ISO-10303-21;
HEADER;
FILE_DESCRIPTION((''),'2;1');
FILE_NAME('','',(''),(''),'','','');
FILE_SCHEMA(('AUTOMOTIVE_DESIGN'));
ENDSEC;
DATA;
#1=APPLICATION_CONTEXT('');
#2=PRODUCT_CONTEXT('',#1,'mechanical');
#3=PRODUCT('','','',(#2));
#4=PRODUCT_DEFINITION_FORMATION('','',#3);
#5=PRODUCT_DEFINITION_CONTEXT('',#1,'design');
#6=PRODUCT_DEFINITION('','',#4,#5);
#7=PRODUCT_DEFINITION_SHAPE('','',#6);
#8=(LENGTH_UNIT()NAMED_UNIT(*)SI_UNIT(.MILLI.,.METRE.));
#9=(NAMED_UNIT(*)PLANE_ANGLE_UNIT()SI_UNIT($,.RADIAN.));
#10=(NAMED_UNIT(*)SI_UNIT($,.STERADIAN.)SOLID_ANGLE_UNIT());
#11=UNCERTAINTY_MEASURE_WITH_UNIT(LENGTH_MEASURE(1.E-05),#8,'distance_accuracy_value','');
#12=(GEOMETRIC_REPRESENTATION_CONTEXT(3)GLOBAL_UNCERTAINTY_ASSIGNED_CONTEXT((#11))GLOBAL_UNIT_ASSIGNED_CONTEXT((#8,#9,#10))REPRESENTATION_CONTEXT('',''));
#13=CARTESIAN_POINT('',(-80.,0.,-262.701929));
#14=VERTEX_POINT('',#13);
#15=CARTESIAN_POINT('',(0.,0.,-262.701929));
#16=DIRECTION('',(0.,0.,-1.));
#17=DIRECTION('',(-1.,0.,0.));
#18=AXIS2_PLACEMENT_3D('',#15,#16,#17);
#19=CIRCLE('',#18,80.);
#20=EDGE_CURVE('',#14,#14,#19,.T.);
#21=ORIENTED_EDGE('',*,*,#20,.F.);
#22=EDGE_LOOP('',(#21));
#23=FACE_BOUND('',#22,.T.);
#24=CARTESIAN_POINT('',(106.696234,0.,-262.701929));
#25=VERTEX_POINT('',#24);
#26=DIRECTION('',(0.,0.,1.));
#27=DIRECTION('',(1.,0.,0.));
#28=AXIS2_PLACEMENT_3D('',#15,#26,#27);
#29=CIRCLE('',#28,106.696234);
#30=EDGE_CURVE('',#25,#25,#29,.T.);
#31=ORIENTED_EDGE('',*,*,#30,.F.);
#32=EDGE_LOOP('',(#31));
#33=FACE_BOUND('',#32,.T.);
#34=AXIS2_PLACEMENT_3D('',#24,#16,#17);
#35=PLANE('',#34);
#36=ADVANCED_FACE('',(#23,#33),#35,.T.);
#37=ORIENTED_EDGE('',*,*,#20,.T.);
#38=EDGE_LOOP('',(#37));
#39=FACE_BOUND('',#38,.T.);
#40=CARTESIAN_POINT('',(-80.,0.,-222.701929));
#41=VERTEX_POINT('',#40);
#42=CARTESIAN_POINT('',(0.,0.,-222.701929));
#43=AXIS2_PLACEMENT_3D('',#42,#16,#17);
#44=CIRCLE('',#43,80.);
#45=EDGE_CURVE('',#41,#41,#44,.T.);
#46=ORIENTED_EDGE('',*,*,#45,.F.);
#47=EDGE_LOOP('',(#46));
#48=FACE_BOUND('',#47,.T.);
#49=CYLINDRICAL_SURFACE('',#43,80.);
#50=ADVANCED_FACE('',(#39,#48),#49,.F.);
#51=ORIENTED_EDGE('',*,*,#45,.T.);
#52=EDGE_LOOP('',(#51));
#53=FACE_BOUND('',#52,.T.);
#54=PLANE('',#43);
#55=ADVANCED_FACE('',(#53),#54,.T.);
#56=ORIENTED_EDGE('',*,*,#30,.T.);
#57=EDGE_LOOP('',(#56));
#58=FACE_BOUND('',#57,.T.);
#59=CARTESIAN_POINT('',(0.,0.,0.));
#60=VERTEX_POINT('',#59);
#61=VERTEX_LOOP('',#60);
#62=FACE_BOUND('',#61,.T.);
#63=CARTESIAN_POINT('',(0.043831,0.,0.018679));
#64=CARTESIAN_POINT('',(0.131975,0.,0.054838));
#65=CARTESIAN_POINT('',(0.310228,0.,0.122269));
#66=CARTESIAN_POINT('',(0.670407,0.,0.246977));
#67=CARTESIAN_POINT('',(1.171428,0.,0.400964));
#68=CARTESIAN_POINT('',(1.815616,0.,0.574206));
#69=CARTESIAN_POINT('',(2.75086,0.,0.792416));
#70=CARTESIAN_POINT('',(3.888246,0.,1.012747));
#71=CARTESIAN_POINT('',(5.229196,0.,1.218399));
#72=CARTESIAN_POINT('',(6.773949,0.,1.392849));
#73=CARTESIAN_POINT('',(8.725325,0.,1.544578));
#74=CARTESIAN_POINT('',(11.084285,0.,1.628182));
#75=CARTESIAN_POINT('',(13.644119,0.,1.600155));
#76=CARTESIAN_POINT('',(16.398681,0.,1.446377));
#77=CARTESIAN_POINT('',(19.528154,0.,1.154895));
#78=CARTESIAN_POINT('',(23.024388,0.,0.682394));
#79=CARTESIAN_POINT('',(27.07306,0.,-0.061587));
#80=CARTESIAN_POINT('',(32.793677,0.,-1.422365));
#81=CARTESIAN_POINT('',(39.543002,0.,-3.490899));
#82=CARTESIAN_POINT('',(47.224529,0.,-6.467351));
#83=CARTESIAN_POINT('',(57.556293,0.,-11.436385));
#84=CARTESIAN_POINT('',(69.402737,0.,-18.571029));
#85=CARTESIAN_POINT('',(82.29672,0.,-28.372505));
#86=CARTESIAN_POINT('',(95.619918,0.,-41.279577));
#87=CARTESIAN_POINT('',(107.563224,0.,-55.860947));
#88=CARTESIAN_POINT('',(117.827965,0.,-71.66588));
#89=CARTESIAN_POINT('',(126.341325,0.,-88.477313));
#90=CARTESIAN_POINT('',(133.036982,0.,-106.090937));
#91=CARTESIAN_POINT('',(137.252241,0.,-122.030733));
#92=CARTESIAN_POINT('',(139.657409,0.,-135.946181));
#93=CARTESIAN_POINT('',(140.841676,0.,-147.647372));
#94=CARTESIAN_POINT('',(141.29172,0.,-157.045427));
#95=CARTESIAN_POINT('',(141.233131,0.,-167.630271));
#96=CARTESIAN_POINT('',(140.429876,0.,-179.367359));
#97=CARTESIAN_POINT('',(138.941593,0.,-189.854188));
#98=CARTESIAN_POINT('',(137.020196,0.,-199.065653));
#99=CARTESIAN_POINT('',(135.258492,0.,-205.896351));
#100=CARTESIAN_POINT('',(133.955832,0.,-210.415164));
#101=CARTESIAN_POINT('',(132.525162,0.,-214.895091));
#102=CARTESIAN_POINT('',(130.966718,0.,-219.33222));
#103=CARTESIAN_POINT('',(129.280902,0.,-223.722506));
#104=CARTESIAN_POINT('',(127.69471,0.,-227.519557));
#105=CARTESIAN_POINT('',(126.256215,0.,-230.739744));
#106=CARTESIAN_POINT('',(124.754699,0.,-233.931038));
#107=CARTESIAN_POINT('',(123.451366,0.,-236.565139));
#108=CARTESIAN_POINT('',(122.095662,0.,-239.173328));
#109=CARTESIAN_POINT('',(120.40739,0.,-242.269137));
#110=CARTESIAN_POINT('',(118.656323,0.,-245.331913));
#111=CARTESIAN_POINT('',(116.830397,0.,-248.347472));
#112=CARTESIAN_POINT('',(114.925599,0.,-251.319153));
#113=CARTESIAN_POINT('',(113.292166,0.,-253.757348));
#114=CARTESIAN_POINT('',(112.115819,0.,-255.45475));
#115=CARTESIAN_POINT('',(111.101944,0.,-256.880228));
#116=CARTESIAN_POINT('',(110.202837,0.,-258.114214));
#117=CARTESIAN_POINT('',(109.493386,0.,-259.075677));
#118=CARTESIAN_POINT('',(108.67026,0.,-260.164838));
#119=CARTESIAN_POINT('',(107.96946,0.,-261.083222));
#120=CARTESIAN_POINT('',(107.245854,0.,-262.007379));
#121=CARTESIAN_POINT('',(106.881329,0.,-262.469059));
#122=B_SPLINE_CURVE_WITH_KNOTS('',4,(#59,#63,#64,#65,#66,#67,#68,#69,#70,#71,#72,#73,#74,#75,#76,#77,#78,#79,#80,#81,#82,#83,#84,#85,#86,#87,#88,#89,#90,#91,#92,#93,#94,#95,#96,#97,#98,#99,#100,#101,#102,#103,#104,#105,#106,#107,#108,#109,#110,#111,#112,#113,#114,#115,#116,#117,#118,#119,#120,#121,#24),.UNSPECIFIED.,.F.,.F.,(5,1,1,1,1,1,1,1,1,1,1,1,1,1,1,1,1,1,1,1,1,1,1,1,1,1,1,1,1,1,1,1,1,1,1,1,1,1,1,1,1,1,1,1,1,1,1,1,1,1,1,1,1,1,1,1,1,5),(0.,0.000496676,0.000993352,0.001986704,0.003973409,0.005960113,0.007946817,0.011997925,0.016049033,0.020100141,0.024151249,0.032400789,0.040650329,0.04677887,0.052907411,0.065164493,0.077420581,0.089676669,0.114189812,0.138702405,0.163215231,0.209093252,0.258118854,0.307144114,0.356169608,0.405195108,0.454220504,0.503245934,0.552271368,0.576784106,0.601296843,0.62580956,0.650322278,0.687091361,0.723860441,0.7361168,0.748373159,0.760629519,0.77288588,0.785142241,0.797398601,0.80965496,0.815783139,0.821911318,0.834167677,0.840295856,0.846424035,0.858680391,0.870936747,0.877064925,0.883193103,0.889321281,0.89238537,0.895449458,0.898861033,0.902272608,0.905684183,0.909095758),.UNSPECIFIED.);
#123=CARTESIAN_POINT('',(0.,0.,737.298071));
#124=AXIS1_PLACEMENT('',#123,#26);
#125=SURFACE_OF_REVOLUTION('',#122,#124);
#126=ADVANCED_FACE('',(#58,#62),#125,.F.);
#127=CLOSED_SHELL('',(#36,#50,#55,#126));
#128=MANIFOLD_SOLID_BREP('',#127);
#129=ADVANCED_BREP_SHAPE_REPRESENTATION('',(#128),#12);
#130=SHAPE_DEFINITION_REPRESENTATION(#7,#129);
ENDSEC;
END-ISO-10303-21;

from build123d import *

# Parameters (mm, degrees)
HOLE1_START     = -262.701929072
HOLE1_OUTLINE_R = 80
HOLE1_DEPTH     = 40


# Read off the part's stored shape, not the designer's step: Hole1
with BuildPart() as part:
    # Sketch1 → Revolve1 (revolve)
    with BuildSketch(Plane(origin=(0, 0, 0), x_dir=(1, 0, 0), z_dir=(0, 1, 0))):
        with BuildLine():
            Line((106.696233767, 262.701929072), (0, 262.701929072))
            Line((0, 262.701929072), (0, 0))
            add(Edge.make_bspline(
                [(0, 0), (0.043830976, -0.018679136), (0.131974544, -0.054837862), (0.310227635, -0.122268555), (0.670407337, -0.246977058), (1.17142801, -0.400964353), (1.815615813, -0.574205655), (2.750859904, -0.792416214), (3.888245832, -1.01274692), (5.229195517, -1.218398889), (6.773949318, -1.392849423), (8.72532478, -1.544578317), (11.084284771, -1.62818225), (13.644119342, -1.600154844), (16.398680634, -1.446376571), (19.528153919, -1.15489532), (23.024388255, -0.682393984), (27.07306049, 0.061587258), (32.793677156, 1.422364752), (39.543002431, 3.490898608), (47.224529114, 6.467351474), (57.556292794, 11.436384869), (69.402736969, 18.571028551), (82.296720299, 28.372505494), (95.619918234, 41.279577467), (107.563224067, 55.860947248), (117.827965424, 71.665879724), (126.341324726, 88.477313347), (133.036982052, 106.090936875), (137.252240905, 122.030733415), (139.657409359, 135.946181249), (140.841675986, 147.647372298), (141.291720367, 157.045426617), (141.233130838, 167.630271044), (140.429876368, 179.36735911), (138.941593195, 189.854188374), (137.020196404, 199.065653139), (135.258491665, 205.896350548), (133.955832388, 210.41516403), (132.525161651, 214.895091141), (130.966717722, 219.332220248), (129.280902335, 223.722506087), (127.694710364, 227.51955736), (126.256215149, 230.739744238), (124.75469901, 233.931037787), (123.451366323, 236.565139378), (122.095661561, 239.173327922), (120.407390083, 242.26913684), (118.656323389, 245.33191257), (116.830397081, 248.347471588), (114.925598842, 251.319153062), (113.292165698, 253.75734764), (112.115819327, 255.454750298), (111.101943835, 256.880227694), (110.202837031, 258.114214129), (109.493385846, 259.0756771), (108.670260495, 260.164838088), (107.969459905, 261.083221773), (107.245854497, 262.007379495), (106.881328517, 262.469058983), (106.696233767, 262.701929072)],
                knots=[0, 0, 0, 0, 0, 0.000496676, 0.000993352, 0.001986704, 0.003973409, 0.005960113, 0.007946817, 0.011997925, 0.016049033, 0.020100141, 0.024151249, 0.032400789, 0.040650329, 0.04677887, 0.052907411, 0.065164493, 0.077420581, 0.089676669, 0.114189812, 0.138702405, 0.163215231, 0.209093252, 0.258118854, 0.307144114, 0.356169608, 0.405195108, 0.454220504, 0.503245934, 0.552271368, 0.576784106, 0.601296843, 0.62580956, 0.650322278, 0.687091361, 0.723860441, 0.7361168, 0.748373159, 0.760629519, 0.77288588, 0.785142241, 0.797398601, 0.80965496, 0.815783139, 0.821911318, 0.834167677, 0.840295856, 0.846424035, 0.858680391, 0.870936747, 0.877064925, 0.883193103, 0.889321281, 0.89238537, 0.895449458, 0.898861033, 0.902272608, 0.905684183, 0.909095758, 0.909095758, 0.909095758, 0.909095758, 0.909095758], degree=4))
        make_face()
    revolve(axis=Axis((0, 0, 737.298070928), (0, 0, -1)))

    # Hole1 outline → Hole1 (cut)
    with BuildSketch(Plane.XY.offset(HOLE1_START)):
        Circle(HOLE1_OUTLINE_R)
    extrude(amount=HOLE1_DEPTH, mode=Mode.SUBTRACT)


solid = part.part
